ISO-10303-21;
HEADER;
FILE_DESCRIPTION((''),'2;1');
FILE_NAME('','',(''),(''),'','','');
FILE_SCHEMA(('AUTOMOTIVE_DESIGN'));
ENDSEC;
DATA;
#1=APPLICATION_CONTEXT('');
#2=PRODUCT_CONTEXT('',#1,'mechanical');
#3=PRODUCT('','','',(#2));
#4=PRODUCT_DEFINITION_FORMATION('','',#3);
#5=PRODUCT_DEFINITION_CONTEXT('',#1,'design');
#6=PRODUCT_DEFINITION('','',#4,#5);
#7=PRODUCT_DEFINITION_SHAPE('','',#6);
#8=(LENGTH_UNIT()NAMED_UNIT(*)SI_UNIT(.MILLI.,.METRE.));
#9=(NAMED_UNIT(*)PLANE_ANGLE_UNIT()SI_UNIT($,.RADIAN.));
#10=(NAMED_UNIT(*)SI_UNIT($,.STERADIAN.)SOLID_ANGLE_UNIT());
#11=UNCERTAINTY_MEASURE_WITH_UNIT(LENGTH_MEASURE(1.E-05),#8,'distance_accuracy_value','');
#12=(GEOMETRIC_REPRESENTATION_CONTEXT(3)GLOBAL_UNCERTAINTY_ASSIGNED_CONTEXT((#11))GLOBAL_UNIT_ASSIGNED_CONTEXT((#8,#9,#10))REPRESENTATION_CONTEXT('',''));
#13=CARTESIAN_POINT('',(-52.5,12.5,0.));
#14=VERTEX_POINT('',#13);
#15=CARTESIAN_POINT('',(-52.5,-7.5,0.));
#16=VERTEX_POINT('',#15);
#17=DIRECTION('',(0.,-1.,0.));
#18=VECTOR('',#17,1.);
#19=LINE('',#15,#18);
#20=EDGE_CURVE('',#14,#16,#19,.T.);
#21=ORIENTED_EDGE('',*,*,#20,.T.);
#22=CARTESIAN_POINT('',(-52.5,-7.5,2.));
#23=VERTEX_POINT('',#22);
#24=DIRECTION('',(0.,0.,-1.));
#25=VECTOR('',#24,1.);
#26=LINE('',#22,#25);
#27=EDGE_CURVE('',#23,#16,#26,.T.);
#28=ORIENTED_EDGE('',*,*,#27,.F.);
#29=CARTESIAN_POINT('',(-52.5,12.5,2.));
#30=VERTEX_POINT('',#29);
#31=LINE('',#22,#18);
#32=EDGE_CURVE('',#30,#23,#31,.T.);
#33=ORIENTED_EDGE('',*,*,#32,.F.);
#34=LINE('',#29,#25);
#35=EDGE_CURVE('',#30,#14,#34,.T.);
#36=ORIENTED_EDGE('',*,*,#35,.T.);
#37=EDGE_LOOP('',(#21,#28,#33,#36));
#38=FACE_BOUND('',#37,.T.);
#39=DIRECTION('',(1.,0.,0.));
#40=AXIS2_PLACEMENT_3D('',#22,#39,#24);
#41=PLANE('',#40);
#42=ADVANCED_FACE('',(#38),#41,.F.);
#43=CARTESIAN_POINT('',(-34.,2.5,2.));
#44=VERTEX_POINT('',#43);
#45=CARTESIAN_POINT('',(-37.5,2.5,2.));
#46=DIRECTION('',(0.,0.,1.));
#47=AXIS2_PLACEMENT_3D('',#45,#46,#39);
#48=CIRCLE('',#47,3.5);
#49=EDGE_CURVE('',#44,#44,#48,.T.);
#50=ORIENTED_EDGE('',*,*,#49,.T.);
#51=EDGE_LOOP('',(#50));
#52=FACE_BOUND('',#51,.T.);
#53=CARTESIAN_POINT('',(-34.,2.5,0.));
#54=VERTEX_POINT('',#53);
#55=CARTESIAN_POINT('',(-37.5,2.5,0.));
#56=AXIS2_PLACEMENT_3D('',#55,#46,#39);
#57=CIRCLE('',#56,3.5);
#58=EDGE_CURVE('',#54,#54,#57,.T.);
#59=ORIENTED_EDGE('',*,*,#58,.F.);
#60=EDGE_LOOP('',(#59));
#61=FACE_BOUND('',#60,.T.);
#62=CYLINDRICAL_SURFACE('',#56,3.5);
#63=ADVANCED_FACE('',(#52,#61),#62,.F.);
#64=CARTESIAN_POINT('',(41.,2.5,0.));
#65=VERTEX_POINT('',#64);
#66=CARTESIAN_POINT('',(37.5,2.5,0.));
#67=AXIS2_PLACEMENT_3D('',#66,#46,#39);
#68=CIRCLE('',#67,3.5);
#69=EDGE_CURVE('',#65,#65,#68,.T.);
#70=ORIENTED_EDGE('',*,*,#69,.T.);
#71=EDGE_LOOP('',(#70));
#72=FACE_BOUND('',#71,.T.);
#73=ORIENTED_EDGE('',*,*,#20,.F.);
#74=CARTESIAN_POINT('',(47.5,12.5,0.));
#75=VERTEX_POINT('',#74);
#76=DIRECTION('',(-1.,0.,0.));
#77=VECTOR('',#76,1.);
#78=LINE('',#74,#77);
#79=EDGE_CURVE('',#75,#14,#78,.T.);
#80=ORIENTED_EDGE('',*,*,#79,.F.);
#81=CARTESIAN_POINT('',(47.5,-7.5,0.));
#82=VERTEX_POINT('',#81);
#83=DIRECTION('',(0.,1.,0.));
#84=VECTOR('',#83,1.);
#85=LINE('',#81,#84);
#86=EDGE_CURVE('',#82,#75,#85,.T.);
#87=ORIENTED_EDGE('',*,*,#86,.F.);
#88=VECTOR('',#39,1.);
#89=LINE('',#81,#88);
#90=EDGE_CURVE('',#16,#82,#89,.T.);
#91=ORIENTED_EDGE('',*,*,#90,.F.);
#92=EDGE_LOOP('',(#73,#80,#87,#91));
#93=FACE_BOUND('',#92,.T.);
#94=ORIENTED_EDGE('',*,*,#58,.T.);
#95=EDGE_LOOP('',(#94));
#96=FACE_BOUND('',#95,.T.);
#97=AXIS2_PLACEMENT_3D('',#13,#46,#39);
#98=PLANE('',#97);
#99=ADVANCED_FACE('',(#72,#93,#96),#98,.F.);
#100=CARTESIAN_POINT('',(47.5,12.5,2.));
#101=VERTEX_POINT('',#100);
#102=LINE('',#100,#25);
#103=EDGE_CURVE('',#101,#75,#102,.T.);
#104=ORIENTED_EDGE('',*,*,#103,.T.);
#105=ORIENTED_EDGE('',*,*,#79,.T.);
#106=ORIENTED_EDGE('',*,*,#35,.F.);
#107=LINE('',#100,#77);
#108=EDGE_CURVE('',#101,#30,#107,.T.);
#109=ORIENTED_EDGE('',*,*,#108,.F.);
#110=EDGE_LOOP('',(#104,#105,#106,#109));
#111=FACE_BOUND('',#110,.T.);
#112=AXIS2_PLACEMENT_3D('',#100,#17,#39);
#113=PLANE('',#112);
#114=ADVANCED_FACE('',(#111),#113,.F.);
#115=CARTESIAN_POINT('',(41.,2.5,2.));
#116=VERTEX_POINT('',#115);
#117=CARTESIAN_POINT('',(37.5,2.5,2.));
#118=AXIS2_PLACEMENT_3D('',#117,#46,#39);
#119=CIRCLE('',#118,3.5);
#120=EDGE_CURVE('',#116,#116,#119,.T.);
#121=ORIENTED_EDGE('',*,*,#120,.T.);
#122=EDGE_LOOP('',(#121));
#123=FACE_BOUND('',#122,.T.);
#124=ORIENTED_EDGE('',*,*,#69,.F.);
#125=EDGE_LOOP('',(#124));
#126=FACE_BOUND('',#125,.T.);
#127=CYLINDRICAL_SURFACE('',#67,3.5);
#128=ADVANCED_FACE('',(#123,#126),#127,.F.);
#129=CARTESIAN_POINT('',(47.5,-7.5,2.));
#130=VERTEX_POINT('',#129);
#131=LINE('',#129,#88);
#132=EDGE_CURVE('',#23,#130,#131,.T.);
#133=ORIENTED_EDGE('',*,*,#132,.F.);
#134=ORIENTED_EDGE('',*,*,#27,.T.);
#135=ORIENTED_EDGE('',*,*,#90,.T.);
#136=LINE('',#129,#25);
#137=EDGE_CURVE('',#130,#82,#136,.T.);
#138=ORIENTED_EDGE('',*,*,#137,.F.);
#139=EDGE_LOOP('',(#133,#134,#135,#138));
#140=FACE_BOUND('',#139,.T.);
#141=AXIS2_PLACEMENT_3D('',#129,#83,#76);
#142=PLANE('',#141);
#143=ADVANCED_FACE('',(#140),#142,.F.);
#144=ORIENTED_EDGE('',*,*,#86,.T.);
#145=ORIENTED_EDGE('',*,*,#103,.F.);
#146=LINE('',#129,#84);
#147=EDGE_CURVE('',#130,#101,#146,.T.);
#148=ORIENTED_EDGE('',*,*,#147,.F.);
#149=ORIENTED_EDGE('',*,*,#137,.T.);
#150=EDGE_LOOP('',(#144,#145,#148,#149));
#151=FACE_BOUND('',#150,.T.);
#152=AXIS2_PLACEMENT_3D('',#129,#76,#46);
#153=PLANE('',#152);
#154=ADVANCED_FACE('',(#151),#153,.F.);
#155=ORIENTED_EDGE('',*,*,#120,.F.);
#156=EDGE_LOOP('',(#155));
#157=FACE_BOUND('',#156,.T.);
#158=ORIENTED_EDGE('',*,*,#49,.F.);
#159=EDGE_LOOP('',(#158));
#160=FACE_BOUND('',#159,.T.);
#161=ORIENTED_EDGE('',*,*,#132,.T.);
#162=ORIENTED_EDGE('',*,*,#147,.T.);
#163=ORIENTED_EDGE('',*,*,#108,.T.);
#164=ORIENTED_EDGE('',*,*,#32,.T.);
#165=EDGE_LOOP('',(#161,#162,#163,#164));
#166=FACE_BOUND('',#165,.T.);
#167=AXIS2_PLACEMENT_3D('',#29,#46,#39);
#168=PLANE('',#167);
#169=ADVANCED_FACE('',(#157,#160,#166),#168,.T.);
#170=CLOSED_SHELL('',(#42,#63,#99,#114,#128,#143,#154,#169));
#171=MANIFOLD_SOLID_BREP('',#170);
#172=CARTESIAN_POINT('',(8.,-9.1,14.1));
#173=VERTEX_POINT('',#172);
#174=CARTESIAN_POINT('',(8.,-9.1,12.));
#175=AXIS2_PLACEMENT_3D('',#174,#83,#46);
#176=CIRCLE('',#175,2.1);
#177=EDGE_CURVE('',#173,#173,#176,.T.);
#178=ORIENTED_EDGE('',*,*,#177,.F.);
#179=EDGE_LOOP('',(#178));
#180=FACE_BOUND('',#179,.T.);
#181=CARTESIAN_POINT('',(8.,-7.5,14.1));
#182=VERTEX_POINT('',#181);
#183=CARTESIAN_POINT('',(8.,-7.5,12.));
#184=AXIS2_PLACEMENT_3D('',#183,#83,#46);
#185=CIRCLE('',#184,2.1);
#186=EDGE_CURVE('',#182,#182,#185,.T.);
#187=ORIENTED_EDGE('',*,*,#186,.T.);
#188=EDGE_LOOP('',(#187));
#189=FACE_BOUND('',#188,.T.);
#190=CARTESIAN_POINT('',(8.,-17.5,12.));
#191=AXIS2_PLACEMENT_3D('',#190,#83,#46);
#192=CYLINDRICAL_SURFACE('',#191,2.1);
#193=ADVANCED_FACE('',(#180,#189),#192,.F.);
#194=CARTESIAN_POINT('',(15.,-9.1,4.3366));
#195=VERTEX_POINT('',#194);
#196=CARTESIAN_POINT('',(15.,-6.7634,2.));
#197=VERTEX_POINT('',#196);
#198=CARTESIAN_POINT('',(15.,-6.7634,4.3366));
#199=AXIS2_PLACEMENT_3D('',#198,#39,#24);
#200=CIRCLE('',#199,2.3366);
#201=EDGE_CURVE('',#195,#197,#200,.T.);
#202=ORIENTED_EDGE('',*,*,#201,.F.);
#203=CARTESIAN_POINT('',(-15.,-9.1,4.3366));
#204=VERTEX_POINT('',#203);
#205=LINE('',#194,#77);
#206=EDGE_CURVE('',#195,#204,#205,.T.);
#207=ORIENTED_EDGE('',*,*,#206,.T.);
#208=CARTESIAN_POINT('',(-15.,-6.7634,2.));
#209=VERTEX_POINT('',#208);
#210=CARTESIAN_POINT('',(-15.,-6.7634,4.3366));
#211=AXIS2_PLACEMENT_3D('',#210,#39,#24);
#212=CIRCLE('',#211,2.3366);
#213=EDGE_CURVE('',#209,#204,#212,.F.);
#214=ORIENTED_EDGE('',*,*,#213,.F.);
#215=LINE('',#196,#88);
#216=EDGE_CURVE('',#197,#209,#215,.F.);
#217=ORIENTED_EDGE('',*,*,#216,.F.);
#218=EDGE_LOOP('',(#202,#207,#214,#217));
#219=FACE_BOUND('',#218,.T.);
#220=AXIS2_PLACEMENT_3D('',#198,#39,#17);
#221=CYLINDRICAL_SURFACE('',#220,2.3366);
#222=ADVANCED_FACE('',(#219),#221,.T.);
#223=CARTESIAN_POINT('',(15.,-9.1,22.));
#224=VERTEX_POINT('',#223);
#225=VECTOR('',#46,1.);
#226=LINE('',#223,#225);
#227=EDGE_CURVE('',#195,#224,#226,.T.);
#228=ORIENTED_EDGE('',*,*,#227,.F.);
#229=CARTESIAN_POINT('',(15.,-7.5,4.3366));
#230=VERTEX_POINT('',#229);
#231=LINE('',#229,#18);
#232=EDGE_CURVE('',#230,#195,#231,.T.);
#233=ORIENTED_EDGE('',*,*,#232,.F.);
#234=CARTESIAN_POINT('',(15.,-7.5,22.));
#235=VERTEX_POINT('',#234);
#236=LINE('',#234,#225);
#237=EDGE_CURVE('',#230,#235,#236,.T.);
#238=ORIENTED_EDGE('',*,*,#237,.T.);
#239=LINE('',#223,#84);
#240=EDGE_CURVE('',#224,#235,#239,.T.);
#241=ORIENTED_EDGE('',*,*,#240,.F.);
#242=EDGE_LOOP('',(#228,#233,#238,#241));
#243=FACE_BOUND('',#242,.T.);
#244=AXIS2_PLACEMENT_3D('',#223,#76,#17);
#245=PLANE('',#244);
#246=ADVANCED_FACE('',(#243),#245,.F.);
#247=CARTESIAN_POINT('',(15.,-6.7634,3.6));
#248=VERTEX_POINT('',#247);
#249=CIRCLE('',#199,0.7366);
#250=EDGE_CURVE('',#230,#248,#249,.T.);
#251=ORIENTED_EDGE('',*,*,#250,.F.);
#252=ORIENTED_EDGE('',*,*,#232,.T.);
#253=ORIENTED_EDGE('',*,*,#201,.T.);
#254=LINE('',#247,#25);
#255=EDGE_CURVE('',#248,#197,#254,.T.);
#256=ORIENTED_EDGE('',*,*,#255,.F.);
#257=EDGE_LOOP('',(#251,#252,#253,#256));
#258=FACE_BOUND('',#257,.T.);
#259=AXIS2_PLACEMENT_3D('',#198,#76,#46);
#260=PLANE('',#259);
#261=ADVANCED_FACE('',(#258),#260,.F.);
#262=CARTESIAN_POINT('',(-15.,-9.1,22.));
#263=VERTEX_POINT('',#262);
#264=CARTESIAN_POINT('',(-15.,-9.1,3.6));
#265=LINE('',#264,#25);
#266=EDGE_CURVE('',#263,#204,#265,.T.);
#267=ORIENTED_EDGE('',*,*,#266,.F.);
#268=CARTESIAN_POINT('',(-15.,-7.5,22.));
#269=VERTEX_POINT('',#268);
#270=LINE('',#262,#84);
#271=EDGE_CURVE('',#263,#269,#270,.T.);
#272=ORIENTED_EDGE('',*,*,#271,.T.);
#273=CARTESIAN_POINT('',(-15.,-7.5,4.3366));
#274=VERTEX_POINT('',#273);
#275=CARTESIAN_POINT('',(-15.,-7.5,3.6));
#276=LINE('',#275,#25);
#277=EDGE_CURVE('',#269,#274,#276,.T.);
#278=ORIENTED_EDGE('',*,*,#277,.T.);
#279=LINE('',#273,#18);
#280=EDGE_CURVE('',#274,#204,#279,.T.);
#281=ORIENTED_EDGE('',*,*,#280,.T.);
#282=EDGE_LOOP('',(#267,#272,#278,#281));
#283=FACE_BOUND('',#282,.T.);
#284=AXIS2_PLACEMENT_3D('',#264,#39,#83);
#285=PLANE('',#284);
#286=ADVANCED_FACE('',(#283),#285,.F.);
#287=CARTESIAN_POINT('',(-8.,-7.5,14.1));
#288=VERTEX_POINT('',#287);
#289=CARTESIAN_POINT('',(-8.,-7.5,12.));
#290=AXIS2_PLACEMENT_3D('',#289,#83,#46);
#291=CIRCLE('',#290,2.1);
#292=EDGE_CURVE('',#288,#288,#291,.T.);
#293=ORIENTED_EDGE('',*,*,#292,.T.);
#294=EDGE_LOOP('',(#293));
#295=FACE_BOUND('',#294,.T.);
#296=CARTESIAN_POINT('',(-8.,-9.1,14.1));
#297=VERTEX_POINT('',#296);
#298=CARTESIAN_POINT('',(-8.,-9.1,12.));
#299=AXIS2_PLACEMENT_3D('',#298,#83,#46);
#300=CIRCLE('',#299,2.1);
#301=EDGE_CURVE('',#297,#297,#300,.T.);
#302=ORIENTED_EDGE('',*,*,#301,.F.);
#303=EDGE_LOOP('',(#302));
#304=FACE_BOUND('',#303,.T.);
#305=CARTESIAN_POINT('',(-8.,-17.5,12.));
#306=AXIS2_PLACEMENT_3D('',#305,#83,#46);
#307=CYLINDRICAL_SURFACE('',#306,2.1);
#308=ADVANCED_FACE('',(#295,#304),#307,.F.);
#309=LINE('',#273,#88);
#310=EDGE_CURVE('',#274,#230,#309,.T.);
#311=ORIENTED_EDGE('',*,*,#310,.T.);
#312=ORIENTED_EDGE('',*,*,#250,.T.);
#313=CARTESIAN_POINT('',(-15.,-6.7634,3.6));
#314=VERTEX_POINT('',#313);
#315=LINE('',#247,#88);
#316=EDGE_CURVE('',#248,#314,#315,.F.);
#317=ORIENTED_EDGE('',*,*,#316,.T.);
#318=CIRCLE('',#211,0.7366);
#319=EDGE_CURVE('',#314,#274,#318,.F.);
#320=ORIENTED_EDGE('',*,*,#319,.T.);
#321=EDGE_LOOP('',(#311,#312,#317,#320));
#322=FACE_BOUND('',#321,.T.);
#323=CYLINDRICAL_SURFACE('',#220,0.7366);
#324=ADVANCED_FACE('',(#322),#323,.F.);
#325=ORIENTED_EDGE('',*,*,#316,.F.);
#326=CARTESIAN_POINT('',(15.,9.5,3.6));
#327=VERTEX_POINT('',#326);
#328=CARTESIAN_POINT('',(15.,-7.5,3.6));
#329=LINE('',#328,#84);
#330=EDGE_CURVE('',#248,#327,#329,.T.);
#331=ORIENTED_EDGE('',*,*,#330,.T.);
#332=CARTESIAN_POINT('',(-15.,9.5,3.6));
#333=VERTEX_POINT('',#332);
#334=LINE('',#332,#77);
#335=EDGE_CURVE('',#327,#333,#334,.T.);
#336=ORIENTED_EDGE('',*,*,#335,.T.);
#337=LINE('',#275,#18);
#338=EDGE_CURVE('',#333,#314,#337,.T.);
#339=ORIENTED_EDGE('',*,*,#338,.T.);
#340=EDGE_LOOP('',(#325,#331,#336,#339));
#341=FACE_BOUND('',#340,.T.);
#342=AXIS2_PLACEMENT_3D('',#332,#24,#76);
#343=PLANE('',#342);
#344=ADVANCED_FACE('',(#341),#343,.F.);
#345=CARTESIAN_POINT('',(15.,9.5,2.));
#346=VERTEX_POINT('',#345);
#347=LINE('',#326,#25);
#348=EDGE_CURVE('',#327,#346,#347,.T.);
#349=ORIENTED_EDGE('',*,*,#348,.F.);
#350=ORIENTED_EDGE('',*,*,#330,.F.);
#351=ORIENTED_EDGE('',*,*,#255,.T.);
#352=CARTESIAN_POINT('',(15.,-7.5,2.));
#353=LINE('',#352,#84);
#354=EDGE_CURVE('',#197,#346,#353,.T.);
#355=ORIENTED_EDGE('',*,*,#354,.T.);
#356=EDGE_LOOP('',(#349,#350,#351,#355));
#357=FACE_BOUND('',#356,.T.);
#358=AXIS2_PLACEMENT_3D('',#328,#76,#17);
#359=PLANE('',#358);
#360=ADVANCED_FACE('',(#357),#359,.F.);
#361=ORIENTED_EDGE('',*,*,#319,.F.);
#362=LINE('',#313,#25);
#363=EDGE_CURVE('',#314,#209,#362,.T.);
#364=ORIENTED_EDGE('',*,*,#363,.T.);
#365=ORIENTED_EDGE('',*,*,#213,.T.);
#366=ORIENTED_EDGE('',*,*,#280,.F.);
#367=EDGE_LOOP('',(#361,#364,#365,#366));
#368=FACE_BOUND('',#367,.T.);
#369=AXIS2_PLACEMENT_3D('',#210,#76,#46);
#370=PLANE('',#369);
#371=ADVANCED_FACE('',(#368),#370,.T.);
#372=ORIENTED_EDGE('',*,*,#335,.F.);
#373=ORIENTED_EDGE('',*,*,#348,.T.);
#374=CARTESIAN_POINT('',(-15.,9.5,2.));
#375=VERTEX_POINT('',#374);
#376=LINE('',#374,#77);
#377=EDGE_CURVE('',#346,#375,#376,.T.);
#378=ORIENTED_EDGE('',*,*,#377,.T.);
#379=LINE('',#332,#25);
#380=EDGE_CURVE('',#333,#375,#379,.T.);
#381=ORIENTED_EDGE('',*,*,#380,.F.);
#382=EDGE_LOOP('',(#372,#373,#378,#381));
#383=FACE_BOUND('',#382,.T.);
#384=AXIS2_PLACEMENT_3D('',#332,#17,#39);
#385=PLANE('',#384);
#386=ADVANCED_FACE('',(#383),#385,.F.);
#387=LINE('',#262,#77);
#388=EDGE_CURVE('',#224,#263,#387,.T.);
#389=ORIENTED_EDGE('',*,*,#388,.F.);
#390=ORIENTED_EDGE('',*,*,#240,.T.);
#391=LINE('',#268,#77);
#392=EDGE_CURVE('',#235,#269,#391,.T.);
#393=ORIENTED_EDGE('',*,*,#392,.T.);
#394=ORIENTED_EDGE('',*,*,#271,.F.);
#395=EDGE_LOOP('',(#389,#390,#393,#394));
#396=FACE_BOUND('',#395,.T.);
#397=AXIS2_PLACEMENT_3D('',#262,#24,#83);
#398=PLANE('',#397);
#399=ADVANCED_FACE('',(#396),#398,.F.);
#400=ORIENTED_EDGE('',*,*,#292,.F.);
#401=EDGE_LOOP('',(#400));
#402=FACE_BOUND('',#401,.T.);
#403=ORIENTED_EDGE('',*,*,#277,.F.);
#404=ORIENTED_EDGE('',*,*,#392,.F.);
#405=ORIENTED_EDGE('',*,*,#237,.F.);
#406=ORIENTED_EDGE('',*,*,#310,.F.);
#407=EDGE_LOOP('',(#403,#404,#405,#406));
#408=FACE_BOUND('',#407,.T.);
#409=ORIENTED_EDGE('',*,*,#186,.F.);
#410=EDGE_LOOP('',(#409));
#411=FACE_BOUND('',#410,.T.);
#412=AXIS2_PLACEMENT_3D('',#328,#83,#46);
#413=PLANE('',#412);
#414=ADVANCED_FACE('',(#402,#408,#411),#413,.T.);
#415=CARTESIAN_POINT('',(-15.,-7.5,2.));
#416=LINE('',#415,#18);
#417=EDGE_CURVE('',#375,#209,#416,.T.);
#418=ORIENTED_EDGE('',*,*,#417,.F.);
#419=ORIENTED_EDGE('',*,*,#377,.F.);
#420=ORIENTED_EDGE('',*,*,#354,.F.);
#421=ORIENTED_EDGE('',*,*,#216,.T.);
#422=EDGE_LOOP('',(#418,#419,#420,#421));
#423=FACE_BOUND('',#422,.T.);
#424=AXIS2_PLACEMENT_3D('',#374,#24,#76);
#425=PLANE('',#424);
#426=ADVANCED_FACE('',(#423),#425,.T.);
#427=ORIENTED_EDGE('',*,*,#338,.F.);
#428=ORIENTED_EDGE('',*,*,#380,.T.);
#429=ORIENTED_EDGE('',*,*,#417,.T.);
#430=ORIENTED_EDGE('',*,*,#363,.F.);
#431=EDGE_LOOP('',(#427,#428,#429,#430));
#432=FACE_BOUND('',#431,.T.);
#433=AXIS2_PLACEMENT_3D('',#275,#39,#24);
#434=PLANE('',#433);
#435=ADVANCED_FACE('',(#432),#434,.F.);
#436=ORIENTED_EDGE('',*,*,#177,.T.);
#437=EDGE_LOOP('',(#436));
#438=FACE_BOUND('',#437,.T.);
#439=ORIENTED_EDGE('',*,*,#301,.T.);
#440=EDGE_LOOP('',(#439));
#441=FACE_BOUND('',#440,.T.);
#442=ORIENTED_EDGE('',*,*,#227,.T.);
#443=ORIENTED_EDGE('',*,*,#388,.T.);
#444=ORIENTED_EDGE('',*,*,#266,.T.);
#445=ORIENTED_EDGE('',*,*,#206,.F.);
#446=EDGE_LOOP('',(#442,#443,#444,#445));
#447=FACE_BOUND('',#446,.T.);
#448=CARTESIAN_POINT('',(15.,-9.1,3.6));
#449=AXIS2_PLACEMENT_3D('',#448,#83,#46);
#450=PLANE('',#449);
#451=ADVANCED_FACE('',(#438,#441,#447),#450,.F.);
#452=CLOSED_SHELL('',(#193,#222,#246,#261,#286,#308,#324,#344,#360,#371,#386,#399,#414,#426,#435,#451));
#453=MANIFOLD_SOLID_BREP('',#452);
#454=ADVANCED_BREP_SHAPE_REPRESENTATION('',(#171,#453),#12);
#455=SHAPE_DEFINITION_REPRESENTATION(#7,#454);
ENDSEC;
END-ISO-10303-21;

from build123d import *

# Parameters (mm, degrees)
SKETCH_1_W                       = 100
SKETCH_1_H                       = 20
EXTRUDE_1_DEPTH                  = 2
SKETCH_2_W                       = 30
SKETCH_2_H                       = 17
SM_BASE_FLANGE_1_DEPTH           = 1.6
SKETCH_11_R                      = 3.5
CUT_EXTRUDE_2_DEPTH              = 55.004629431
SM_EDGE_FLANGE_1_STRIP_W         = 7.8732
SM_EDGE_FLANGE_1_STRIP_H         = 1.6
SM_EDGE_FLANGE_1_STRIP_CUT_DEPTH = 30
SM_EDGE_FLANGE_1_DEPTH           = 30
SKETCH_15_R                      = 2.1
CUT_EXTRUDE_3_DEPTH              = 10


# Sheet-metal steps are written as plain solids
with BuildPart() as part:
    # Sketch 1 → 凸台-拉伸1 (new body)
    with BuildSketch(Plane.XY):
        with Locations((-2.5, 2.5)):
            Rectangle(SKETCH_1_W, SKETCH_1_H)
    extrude(amount=EXTRUDE_1_DEPTH)

    # 草图11 → 切除-拉伸2 (cut, through all)
    with BuildSketch(Plane.XY.offset(2)):
        with Locations((-37.5, 2.5)):
            Circle(SKETCH_11_R)
        with Locations((37.5, 2.5)):
            Circle(SKETCH_11_R)
    extrude(amount=-CUT_EXTRUDE_2_DEPTH, mode=Mode.SUBTRACT)


with BuildPart() as body_2:
    # 草图2 → 基体-法兰1 (new body)
    with BuildSketch(Plane.XY.offset(2)):
        with Locations((0, 1)):
            Rectangle(SKETCH_2_W, SKETCH_2_H)
    extrude(amount=SM_BASE_FLANGE_1_DEPTH)

    # 边线-法兰1 strip (across the edge) → 边线-法兰1 strip cut (cut)
    with BuildSketch(Plane(origin=(-15, -7.5, 3.6), x_dir=(0, 1, 0), z_dir=(1, 0, 0))):
        with Locations((-3.2, -0.8)):
            Rectangle(SM_EDGE_FLANGE_1_STRIP_W, SM_EDGE_FLANGE_1_STRIP_H)
    extrude(amount=SM_EDGE_FLANGE_1_STRIP_CUT_DEPTH, mode=Mode.SUBTRACT)

    # 边线-法兰1 section (across the edge) → 边线-法兰1 (add)
    with BuildSketch(Plane(origin=(-15, -7.5, 3.6), x_dir=(0, 1, 0), z_dir=(1, 0, 0))):
        with BuildLine():
            Line((-1.6, 0.7366), (-1.6, 18.4))
            Line((-1.6, 18.4), (0, 18.4))
            Line((0, 18.4), (0, 0.7366))
            ThreePointArc((0, 0.7366), (0.215745145, 0.215745145), (0.7366, 0))
            Line((0.7366, 0), (0.7366, -1.6))
            ThreePointArc((0.7366, -1.6), (-0.915625705, -0.915625705), (-1.6, 0.7366))
        make_face()
    extrude(amount=SM_EDGE_FLANGE_1_DEPTH)

    # 草图15 → 切除-拉伸3 (cut)
    with BuildSketch(Plane(origin=(0, -7.5, 0), x_dir=(1, 0, 0), z_dir=(0, 1, 0))):
        with Locations(Location((-8, -12, 0), (0, 0, 270))):
            Circle(SKETCH_15_R)
        with Locations(Location((8, -12, 0), (0, 0, 270))):
            Circle(SKETCH_15_R)
    extrude(amount=-CUT_EXTRUDE_3_DEPTH, mode=Mode.SUBTRACT)


solid = Compound([part.part, body_2.part])
